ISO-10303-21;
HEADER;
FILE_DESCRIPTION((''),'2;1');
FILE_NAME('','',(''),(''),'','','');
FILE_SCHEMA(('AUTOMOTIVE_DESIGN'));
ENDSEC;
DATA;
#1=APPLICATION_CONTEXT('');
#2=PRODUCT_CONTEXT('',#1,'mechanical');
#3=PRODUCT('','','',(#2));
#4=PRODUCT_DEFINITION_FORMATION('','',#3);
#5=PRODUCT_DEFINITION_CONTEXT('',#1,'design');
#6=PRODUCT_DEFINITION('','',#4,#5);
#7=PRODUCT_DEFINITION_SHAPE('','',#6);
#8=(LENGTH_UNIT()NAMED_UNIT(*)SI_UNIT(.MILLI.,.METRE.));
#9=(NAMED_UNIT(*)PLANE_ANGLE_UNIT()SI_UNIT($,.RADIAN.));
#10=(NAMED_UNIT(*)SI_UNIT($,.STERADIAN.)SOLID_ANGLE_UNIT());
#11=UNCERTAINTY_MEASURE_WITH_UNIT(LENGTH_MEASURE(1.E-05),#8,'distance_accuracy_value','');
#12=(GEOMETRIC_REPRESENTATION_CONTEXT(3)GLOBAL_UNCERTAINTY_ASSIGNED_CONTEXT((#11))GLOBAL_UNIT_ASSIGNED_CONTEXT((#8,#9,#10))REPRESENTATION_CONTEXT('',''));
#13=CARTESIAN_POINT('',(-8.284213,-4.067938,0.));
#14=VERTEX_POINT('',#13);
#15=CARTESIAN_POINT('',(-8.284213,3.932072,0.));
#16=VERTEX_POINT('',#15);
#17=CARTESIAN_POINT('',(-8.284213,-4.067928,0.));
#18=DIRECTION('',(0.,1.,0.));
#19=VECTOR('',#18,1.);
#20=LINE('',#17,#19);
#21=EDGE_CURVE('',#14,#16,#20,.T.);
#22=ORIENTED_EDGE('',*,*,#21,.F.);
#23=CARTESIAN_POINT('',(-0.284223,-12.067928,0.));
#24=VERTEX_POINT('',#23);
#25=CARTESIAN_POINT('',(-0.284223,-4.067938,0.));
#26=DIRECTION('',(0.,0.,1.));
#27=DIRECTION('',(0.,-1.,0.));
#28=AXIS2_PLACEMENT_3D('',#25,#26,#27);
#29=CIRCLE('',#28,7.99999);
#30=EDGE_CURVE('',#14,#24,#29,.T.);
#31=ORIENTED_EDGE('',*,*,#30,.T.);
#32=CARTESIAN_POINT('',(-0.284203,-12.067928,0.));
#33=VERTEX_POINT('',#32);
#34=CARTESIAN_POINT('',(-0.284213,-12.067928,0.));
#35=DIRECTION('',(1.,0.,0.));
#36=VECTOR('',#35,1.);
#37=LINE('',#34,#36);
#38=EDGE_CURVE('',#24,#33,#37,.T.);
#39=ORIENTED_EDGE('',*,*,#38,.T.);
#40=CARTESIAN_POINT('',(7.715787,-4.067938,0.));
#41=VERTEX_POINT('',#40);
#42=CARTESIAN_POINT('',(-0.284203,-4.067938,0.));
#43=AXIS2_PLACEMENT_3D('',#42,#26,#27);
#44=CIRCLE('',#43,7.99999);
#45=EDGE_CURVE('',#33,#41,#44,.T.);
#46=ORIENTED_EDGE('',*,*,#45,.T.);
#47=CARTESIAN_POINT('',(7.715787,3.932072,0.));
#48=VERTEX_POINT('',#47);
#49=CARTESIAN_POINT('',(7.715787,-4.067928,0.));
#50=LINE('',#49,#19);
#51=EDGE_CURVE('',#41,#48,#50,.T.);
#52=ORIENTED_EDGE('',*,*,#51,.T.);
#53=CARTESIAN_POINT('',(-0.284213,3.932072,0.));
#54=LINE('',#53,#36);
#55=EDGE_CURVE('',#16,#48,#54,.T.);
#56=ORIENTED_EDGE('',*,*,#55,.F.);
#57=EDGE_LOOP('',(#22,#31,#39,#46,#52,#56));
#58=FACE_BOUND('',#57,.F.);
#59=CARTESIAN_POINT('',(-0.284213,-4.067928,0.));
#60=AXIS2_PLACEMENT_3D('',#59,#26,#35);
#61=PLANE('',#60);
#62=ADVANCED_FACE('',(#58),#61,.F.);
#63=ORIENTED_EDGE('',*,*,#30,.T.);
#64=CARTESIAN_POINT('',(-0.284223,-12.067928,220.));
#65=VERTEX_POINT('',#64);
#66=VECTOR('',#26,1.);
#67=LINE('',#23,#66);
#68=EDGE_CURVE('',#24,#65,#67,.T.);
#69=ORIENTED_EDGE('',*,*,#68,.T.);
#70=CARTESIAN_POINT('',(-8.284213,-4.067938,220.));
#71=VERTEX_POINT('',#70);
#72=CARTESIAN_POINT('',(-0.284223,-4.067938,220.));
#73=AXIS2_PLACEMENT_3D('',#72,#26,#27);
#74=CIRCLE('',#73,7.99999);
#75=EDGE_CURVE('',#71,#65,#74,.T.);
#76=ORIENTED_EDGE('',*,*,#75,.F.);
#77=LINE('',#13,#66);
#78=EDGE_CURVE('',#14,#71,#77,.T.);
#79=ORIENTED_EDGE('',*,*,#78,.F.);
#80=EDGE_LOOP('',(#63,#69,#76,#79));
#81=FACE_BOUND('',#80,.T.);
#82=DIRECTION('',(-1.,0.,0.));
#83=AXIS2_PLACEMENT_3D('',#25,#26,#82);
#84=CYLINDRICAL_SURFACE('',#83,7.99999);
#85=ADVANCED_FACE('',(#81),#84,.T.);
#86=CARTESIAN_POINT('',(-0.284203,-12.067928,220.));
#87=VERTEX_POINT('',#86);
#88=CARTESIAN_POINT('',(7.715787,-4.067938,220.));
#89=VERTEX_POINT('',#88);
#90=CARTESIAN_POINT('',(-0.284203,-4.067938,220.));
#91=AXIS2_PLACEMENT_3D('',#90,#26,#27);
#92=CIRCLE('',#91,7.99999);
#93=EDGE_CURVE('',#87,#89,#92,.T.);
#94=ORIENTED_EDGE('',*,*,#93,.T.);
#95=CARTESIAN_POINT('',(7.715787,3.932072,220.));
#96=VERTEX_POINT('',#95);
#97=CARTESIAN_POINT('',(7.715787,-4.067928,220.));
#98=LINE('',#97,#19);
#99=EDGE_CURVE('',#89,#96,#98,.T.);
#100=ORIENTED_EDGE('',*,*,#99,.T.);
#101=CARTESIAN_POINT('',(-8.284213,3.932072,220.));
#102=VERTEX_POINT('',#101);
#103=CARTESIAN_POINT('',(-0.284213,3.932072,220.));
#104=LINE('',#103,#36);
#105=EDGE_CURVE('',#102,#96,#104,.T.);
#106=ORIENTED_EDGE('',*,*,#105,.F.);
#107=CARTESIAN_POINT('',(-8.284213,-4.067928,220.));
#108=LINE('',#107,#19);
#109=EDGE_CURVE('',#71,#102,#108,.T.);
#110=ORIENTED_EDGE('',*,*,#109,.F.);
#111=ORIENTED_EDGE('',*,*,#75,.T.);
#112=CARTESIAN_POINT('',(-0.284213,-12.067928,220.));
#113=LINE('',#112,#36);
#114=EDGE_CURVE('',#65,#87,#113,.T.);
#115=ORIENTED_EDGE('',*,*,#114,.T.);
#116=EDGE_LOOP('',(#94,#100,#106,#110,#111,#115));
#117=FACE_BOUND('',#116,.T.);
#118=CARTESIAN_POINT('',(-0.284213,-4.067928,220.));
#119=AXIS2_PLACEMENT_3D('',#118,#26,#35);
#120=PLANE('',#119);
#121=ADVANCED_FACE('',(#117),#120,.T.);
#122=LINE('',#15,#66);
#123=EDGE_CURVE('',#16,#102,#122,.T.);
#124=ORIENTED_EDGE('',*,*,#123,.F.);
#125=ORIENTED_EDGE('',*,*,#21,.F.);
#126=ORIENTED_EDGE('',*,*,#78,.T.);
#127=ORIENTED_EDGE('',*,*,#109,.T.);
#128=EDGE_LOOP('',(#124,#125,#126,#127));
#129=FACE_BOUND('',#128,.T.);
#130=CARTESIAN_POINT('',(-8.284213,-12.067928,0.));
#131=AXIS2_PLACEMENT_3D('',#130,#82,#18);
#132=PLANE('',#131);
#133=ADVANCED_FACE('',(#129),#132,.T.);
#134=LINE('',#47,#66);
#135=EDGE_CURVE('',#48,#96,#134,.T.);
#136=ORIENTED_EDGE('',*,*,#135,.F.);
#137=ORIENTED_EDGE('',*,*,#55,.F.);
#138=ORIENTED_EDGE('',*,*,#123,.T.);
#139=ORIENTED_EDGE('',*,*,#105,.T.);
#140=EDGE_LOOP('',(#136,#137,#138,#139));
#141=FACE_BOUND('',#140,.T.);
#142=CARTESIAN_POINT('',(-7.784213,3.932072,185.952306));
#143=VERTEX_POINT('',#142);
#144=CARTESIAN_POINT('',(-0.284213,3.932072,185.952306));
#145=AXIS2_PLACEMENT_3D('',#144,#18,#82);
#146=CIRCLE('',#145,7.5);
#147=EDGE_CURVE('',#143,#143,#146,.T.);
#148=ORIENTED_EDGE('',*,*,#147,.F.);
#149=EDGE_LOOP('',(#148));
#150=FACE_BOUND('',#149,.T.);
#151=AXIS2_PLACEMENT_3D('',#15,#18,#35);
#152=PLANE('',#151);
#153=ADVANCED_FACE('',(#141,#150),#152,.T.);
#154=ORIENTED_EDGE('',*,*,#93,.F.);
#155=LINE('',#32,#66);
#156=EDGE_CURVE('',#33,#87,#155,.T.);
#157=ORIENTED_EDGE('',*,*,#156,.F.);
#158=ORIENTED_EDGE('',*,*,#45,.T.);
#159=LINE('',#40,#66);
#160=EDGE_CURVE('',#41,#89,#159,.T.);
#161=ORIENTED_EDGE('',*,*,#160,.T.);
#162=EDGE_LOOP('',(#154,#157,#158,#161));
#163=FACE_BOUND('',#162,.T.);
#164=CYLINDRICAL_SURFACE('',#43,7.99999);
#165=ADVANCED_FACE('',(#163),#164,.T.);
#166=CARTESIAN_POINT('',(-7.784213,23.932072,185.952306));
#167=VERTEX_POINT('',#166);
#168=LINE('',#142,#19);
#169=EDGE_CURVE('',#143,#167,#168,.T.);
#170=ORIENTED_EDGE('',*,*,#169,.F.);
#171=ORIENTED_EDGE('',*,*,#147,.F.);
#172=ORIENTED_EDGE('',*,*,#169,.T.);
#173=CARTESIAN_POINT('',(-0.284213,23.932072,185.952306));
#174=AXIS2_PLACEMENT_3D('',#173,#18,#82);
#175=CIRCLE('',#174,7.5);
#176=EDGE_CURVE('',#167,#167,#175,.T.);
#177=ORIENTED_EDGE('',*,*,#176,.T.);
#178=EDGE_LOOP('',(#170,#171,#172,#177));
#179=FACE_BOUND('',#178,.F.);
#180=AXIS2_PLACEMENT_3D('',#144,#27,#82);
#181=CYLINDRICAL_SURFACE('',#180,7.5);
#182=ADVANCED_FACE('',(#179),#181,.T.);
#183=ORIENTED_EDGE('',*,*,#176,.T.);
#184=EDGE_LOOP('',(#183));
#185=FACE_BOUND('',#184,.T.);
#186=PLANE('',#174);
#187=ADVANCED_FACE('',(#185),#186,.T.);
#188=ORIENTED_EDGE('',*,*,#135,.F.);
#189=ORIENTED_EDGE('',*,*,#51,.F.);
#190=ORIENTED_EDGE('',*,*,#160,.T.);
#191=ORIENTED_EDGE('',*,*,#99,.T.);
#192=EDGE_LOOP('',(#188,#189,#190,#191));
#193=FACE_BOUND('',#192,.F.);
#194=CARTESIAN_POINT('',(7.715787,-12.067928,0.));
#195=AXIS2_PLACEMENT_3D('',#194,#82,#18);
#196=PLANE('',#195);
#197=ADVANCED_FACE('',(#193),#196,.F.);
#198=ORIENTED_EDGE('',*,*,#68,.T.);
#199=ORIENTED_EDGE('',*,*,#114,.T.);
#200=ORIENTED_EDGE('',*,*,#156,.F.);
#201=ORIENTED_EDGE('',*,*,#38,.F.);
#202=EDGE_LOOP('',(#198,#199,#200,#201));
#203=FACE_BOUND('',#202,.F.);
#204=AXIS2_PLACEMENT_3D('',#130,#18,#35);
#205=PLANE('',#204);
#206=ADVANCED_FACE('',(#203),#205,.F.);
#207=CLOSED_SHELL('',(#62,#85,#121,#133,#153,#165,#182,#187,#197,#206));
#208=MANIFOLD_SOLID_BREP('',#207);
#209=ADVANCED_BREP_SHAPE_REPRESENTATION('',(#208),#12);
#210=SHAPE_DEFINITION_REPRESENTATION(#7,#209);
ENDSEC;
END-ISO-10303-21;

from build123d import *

# Parameters (mm, degrees)
F0_W     = 16
F0_H     = 16
F1_DEPTH = 220
F2_R     = 7.99999
F3_R     = 7.5
F4_DEPTH = 20


# Not quite as in the source:
# - a fillet or chamfer is up to 0.001 mm smaller than in the source, because OpenCascade refuses the exact size


with BuildPart() as f1:
    # F0 (on Top) → F1 (new body)
    with BuildSketch(Plane.XY):
        with Locations((-0.2842125371, -4.0679279789)):
            Rectangle(F0_W, F0_H)
    extrude(amount=F1_DEPTH)

    # F2 (radius 8 in the source; OpenCascade refuses exactly that, so slightly less here)
    f2_edges = [f1.edges().sort_by_distance(p)[0] for p in [
        (-8.284213, -12.067928, 110),
        (7.715787, -12.067928, 110),
    ]]
    fillet(f2_edges, radius=F2_R)

    # F3 (on face) → F4 (join)
    with BuildSketch(Plane(origin=(0, 3.9320720211, 0), x_dir=(-1, 0, 0), z_dir=(0, 1, 0))):
        with Locations((0.2842125371, 185.9523057938)):
            Circle(F3_R)
    extrude(amount=F4_DEPTH)


solid = f1.part
